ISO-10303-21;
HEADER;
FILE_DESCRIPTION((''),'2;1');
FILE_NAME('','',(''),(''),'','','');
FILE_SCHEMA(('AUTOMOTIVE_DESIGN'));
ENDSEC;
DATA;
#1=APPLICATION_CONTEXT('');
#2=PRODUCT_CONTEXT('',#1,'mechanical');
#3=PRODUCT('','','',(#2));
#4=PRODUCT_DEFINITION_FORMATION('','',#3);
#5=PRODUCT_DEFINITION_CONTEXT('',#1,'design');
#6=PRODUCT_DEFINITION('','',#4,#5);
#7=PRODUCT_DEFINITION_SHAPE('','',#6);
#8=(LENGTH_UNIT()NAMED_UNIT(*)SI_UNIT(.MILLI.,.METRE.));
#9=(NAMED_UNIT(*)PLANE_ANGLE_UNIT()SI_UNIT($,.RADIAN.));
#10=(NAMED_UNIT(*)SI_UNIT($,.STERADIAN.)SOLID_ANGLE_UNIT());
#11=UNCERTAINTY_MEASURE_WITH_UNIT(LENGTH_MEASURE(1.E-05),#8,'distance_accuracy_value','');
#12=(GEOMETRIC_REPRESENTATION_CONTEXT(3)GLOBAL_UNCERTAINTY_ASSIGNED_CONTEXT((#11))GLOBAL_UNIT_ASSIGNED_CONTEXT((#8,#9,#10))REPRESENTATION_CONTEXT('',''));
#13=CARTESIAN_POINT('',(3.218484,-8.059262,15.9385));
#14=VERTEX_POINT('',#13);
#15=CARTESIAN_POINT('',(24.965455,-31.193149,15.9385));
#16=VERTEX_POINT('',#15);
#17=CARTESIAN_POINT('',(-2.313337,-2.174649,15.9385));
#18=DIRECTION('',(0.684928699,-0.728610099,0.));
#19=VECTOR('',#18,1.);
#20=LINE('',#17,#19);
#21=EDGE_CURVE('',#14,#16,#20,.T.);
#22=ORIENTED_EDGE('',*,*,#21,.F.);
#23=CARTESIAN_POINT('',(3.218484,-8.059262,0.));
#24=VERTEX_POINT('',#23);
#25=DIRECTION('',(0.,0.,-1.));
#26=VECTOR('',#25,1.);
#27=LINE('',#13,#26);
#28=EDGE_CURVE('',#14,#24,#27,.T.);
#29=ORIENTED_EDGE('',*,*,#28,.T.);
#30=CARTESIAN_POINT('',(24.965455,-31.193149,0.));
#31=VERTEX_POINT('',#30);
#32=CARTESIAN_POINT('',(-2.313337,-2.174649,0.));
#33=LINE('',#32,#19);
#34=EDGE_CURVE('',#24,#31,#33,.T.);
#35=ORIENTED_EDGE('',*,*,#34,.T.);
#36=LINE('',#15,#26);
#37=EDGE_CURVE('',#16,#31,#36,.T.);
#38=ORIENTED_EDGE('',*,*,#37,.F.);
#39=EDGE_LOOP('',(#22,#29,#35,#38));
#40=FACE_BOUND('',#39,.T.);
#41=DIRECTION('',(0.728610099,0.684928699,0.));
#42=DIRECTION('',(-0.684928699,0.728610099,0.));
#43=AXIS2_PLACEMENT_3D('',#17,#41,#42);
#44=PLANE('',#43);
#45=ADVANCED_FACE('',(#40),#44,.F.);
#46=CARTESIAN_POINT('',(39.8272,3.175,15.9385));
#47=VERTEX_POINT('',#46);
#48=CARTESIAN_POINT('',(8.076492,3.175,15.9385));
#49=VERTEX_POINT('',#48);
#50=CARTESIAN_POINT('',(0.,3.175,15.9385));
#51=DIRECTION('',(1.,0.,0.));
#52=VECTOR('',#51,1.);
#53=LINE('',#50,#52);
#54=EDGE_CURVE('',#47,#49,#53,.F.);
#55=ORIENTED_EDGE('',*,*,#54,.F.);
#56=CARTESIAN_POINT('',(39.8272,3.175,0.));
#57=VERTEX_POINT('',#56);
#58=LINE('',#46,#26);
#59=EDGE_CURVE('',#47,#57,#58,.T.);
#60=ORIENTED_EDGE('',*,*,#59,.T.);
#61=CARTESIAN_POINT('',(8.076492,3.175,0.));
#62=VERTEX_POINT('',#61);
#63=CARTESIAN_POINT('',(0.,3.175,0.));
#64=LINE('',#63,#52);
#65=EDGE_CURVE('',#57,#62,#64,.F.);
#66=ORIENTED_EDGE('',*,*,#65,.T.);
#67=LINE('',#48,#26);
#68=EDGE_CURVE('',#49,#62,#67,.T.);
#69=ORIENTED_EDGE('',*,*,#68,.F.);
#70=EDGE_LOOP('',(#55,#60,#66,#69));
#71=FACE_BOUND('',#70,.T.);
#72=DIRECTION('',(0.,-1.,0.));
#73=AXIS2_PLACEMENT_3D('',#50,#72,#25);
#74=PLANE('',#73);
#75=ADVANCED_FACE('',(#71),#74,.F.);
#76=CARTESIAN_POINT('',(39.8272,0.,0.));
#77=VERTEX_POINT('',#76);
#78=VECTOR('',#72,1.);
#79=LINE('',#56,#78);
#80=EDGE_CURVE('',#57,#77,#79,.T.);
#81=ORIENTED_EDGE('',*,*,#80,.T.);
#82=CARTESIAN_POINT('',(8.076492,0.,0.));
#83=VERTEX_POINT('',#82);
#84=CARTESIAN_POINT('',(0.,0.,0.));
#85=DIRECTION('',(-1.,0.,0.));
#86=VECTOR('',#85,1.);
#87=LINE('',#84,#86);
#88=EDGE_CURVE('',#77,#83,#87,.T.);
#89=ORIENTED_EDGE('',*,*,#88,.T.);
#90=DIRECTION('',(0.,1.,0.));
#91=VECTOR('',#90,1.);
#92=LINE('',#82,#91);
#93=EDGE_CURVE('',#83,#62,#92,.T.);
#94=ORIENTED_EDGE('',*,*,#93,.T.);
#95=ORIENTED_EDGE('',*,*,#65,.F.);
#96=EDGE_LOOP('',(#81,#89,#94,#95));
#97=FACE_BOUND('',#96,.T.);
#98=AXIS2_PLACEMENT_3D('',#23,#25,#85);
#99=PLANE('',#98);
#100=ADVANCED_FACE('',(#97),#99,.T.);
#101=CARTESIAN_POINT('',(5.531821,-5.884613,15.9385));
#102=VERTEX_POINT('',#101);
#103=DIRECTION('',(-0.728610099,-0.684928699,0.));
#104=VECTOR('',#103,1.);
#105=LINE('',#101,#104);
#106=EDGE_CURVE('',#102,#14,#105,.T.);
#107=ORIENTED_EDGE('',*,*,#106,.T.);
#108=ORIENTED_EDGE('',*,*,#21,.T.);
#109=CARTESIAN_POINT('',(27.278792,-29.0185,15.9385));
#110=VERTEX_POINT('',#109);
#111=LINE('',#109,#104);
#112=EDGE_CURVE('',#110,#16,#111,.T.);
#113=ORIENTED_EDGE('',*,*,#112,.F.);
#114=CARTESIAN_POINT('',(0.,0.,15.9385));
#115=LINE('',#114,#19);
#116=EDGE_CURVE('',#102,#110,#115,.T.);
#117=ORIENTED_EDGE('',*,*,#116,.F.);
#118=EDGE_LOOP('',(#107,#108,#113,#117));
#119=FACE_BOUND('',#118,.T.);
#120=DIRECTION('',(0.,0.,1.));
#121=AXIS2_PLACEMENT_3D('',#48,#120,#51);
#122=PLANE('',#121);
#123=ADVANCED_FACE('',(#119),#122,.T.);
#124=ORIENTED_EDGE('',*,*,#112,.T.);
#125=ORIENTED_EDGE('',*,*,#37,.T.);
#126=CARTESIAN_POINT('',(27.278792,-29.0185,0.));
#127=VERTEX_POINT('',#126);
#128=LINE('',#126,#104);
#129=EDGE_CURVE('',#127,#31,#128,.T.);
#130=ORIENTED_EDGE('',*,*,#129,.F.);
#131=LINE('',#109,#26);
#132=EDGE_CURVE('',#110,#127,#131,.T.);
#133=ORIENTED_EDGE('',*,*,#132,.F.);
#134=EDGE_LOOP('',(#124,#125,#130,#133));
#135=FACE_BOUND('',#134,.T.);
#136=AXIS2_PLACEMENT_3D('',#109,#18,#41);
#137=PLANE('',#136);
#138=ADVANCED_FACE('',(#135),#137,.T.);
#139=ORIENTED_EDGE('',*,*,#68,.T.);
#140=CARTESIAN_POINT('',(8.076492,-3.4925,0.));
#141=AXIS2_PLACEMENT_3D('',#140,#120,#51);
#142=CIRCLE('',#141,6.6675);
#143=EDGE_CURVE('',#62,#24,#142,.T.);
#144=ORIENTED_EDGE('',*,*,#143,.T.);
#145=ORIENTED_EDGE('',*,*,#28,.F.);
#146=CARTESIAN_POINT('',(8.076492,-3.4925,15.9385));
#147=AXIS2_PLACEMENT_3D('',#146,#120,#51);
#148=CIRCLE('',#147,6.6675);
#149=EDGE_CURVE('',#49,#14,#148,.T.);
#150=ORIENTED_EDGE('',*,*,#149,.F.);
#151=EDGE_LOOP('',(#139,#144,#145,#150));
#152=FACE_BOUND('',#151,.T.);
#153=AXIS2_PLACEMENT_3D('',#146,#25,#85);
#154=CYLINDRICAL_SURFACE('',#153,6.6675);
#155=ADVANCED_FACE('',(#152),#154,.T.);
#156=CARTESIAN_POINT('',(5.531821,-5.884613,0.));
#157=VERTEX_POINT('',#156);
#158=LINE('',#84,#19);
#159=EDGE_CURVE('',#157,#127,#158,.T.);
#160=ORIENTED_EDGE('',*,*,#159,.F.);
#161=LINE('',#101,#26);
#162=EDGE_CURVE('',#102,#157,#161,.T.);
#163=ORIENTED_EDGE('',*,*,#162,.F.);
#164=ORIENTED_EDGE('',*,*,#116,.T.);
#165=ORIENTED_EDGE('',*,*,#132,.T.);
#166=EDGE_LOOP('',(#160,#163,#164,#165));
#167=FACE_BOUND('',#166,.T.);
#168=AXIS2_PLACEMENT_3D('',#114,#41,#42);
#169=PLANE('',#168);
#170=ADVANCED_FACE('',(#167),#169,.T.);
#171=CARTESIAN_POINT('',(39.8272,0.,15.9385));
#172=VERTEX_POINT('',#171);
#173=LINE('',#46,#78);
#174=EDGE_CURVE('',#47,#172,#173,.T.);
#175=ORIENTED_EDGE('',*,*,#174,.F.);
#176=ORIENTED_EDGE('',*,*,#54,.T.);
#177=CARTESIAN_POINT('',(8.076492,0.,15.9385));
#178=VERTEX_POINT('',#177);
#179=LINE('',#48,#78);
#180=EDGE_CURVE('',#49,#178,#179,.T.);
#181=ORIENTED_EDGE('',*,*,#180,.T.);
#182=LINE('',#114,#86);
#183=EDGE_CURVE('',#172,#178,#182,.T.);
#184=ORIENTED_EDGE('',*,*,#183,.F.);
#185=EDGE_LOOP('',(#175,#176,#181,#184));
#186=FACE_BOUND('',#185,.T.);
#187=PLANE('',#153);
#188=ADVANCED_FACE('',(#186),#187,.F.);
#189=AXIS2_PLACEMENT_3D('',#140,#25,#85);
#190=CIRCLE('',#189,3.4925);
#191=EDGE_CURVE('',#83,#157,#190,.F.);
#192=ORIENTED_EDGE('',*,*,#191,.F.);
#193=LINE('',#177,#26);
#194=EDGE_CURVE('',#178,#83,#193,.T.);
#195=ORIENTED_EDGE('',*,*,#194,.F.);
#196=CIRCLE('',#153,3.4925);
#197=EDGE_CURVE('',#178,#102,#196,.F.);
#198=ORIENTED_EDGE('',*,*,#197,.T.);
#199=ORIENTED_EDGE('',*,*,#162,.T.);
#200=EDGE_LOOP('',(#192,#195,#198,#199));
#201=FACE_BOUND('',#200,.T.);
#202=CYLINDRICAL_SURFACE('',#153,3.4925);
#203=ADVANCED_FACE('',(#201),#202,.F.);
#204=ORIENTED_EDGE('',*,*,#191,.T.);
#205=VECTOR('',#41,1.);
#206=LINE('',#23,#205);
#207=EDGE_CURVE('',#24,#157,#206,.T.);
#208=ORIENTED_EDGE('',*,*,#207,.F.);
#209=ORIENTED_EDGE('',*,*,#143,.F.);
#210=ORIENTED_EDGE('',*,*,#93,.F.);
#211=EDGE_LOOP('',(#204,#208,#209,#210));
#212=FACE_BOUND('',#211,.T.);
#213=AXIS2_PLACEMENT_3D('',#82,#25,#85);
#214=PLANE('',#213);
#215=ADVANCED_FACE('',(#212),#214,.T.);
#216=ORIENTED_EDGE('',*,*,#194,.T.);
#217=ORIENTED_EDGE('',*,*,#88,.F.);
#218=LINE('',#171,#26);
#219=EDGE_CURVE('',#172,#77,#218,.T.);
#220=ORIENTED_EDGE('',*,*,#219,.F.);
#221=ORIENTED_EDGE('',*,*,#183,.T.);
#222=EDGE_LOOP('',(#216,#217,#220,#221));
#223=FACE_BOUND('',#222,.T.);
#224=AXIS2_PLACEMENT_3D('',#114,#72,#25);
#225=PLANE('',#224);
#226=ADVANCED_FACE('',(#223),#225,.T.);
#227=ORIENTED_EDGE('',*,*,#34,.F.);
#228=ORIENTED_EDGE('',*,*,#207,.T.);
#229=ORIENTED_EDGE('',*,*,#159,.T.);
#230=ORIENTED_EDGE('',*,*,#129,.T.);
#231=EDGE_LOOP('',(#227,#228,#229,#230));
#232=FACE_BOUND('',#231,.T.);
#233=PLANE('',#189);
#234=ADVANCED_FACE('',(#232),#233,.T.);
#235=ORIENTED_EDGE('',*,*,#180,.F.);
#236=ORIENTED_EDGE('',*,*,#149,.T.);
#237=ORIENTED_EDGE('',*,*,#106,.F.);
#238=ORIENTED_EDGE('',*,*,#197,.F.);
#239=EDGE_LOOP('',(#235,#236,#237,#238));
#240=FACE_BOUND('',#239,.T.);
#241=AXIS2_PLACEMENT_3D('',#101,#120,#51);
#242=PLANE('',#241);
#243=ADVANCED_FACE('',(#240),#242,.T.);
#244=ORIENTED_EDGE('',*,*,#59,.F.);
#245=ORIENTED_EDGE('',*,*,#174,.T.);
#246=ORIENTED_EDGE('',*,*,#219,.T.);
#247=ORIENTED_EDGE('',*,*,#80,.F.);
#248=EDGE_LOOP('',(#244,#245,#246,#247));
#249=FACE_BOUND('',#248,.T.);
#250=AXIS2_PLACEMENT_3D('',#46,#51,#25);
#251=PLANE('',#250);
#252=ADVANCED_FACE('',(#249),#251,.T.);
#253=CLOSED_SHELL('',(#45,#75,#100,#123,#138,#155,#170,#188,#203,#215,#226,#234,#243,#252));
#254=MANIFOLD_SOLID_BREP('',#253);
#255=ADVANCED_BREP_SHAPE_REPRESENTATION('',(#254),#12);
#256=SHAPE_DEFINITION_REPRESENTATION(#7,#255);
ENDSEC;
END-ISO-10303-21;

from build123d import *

# Parameters (mm, degrees)
BASE_FLANGE1_DEPTH = 15.9385


# Sheet-metal steps are written as plain solids
with BuildPart() as part:
    # Sketch2 → Base-Flange1 (new body)
    with BuildSketch(Plane.XY):
        with BuildLine():
            Line((27.278792287, -29.018500154), (5.531821011, -5.884613482))
            ThreePointArc((5.531821011, -5.884613482), (4.870870737, -2.106300174), (8.076491783, 0))
            Line((8.076491783, 0), (39.8272, 0))
            Line((39.8272, 0), (39.8272, 3.175))
            Line((39.8272, 3.175), (8.076491783, 3.175))
            ThreePointArc((8.076491783, 3.175), (1.956669786, -0.846118514), (3.218483945, -8.059262102))
            Line((3.218483945, -8.059262102), (24.965455221, -31.193148774))
            Line((24.965455221, -31.193148774), (27.278792287, -29.018500154))
        make_face()
    extrude(amount=BASE_FLANGE1_DEPTH)


solid = part.part
